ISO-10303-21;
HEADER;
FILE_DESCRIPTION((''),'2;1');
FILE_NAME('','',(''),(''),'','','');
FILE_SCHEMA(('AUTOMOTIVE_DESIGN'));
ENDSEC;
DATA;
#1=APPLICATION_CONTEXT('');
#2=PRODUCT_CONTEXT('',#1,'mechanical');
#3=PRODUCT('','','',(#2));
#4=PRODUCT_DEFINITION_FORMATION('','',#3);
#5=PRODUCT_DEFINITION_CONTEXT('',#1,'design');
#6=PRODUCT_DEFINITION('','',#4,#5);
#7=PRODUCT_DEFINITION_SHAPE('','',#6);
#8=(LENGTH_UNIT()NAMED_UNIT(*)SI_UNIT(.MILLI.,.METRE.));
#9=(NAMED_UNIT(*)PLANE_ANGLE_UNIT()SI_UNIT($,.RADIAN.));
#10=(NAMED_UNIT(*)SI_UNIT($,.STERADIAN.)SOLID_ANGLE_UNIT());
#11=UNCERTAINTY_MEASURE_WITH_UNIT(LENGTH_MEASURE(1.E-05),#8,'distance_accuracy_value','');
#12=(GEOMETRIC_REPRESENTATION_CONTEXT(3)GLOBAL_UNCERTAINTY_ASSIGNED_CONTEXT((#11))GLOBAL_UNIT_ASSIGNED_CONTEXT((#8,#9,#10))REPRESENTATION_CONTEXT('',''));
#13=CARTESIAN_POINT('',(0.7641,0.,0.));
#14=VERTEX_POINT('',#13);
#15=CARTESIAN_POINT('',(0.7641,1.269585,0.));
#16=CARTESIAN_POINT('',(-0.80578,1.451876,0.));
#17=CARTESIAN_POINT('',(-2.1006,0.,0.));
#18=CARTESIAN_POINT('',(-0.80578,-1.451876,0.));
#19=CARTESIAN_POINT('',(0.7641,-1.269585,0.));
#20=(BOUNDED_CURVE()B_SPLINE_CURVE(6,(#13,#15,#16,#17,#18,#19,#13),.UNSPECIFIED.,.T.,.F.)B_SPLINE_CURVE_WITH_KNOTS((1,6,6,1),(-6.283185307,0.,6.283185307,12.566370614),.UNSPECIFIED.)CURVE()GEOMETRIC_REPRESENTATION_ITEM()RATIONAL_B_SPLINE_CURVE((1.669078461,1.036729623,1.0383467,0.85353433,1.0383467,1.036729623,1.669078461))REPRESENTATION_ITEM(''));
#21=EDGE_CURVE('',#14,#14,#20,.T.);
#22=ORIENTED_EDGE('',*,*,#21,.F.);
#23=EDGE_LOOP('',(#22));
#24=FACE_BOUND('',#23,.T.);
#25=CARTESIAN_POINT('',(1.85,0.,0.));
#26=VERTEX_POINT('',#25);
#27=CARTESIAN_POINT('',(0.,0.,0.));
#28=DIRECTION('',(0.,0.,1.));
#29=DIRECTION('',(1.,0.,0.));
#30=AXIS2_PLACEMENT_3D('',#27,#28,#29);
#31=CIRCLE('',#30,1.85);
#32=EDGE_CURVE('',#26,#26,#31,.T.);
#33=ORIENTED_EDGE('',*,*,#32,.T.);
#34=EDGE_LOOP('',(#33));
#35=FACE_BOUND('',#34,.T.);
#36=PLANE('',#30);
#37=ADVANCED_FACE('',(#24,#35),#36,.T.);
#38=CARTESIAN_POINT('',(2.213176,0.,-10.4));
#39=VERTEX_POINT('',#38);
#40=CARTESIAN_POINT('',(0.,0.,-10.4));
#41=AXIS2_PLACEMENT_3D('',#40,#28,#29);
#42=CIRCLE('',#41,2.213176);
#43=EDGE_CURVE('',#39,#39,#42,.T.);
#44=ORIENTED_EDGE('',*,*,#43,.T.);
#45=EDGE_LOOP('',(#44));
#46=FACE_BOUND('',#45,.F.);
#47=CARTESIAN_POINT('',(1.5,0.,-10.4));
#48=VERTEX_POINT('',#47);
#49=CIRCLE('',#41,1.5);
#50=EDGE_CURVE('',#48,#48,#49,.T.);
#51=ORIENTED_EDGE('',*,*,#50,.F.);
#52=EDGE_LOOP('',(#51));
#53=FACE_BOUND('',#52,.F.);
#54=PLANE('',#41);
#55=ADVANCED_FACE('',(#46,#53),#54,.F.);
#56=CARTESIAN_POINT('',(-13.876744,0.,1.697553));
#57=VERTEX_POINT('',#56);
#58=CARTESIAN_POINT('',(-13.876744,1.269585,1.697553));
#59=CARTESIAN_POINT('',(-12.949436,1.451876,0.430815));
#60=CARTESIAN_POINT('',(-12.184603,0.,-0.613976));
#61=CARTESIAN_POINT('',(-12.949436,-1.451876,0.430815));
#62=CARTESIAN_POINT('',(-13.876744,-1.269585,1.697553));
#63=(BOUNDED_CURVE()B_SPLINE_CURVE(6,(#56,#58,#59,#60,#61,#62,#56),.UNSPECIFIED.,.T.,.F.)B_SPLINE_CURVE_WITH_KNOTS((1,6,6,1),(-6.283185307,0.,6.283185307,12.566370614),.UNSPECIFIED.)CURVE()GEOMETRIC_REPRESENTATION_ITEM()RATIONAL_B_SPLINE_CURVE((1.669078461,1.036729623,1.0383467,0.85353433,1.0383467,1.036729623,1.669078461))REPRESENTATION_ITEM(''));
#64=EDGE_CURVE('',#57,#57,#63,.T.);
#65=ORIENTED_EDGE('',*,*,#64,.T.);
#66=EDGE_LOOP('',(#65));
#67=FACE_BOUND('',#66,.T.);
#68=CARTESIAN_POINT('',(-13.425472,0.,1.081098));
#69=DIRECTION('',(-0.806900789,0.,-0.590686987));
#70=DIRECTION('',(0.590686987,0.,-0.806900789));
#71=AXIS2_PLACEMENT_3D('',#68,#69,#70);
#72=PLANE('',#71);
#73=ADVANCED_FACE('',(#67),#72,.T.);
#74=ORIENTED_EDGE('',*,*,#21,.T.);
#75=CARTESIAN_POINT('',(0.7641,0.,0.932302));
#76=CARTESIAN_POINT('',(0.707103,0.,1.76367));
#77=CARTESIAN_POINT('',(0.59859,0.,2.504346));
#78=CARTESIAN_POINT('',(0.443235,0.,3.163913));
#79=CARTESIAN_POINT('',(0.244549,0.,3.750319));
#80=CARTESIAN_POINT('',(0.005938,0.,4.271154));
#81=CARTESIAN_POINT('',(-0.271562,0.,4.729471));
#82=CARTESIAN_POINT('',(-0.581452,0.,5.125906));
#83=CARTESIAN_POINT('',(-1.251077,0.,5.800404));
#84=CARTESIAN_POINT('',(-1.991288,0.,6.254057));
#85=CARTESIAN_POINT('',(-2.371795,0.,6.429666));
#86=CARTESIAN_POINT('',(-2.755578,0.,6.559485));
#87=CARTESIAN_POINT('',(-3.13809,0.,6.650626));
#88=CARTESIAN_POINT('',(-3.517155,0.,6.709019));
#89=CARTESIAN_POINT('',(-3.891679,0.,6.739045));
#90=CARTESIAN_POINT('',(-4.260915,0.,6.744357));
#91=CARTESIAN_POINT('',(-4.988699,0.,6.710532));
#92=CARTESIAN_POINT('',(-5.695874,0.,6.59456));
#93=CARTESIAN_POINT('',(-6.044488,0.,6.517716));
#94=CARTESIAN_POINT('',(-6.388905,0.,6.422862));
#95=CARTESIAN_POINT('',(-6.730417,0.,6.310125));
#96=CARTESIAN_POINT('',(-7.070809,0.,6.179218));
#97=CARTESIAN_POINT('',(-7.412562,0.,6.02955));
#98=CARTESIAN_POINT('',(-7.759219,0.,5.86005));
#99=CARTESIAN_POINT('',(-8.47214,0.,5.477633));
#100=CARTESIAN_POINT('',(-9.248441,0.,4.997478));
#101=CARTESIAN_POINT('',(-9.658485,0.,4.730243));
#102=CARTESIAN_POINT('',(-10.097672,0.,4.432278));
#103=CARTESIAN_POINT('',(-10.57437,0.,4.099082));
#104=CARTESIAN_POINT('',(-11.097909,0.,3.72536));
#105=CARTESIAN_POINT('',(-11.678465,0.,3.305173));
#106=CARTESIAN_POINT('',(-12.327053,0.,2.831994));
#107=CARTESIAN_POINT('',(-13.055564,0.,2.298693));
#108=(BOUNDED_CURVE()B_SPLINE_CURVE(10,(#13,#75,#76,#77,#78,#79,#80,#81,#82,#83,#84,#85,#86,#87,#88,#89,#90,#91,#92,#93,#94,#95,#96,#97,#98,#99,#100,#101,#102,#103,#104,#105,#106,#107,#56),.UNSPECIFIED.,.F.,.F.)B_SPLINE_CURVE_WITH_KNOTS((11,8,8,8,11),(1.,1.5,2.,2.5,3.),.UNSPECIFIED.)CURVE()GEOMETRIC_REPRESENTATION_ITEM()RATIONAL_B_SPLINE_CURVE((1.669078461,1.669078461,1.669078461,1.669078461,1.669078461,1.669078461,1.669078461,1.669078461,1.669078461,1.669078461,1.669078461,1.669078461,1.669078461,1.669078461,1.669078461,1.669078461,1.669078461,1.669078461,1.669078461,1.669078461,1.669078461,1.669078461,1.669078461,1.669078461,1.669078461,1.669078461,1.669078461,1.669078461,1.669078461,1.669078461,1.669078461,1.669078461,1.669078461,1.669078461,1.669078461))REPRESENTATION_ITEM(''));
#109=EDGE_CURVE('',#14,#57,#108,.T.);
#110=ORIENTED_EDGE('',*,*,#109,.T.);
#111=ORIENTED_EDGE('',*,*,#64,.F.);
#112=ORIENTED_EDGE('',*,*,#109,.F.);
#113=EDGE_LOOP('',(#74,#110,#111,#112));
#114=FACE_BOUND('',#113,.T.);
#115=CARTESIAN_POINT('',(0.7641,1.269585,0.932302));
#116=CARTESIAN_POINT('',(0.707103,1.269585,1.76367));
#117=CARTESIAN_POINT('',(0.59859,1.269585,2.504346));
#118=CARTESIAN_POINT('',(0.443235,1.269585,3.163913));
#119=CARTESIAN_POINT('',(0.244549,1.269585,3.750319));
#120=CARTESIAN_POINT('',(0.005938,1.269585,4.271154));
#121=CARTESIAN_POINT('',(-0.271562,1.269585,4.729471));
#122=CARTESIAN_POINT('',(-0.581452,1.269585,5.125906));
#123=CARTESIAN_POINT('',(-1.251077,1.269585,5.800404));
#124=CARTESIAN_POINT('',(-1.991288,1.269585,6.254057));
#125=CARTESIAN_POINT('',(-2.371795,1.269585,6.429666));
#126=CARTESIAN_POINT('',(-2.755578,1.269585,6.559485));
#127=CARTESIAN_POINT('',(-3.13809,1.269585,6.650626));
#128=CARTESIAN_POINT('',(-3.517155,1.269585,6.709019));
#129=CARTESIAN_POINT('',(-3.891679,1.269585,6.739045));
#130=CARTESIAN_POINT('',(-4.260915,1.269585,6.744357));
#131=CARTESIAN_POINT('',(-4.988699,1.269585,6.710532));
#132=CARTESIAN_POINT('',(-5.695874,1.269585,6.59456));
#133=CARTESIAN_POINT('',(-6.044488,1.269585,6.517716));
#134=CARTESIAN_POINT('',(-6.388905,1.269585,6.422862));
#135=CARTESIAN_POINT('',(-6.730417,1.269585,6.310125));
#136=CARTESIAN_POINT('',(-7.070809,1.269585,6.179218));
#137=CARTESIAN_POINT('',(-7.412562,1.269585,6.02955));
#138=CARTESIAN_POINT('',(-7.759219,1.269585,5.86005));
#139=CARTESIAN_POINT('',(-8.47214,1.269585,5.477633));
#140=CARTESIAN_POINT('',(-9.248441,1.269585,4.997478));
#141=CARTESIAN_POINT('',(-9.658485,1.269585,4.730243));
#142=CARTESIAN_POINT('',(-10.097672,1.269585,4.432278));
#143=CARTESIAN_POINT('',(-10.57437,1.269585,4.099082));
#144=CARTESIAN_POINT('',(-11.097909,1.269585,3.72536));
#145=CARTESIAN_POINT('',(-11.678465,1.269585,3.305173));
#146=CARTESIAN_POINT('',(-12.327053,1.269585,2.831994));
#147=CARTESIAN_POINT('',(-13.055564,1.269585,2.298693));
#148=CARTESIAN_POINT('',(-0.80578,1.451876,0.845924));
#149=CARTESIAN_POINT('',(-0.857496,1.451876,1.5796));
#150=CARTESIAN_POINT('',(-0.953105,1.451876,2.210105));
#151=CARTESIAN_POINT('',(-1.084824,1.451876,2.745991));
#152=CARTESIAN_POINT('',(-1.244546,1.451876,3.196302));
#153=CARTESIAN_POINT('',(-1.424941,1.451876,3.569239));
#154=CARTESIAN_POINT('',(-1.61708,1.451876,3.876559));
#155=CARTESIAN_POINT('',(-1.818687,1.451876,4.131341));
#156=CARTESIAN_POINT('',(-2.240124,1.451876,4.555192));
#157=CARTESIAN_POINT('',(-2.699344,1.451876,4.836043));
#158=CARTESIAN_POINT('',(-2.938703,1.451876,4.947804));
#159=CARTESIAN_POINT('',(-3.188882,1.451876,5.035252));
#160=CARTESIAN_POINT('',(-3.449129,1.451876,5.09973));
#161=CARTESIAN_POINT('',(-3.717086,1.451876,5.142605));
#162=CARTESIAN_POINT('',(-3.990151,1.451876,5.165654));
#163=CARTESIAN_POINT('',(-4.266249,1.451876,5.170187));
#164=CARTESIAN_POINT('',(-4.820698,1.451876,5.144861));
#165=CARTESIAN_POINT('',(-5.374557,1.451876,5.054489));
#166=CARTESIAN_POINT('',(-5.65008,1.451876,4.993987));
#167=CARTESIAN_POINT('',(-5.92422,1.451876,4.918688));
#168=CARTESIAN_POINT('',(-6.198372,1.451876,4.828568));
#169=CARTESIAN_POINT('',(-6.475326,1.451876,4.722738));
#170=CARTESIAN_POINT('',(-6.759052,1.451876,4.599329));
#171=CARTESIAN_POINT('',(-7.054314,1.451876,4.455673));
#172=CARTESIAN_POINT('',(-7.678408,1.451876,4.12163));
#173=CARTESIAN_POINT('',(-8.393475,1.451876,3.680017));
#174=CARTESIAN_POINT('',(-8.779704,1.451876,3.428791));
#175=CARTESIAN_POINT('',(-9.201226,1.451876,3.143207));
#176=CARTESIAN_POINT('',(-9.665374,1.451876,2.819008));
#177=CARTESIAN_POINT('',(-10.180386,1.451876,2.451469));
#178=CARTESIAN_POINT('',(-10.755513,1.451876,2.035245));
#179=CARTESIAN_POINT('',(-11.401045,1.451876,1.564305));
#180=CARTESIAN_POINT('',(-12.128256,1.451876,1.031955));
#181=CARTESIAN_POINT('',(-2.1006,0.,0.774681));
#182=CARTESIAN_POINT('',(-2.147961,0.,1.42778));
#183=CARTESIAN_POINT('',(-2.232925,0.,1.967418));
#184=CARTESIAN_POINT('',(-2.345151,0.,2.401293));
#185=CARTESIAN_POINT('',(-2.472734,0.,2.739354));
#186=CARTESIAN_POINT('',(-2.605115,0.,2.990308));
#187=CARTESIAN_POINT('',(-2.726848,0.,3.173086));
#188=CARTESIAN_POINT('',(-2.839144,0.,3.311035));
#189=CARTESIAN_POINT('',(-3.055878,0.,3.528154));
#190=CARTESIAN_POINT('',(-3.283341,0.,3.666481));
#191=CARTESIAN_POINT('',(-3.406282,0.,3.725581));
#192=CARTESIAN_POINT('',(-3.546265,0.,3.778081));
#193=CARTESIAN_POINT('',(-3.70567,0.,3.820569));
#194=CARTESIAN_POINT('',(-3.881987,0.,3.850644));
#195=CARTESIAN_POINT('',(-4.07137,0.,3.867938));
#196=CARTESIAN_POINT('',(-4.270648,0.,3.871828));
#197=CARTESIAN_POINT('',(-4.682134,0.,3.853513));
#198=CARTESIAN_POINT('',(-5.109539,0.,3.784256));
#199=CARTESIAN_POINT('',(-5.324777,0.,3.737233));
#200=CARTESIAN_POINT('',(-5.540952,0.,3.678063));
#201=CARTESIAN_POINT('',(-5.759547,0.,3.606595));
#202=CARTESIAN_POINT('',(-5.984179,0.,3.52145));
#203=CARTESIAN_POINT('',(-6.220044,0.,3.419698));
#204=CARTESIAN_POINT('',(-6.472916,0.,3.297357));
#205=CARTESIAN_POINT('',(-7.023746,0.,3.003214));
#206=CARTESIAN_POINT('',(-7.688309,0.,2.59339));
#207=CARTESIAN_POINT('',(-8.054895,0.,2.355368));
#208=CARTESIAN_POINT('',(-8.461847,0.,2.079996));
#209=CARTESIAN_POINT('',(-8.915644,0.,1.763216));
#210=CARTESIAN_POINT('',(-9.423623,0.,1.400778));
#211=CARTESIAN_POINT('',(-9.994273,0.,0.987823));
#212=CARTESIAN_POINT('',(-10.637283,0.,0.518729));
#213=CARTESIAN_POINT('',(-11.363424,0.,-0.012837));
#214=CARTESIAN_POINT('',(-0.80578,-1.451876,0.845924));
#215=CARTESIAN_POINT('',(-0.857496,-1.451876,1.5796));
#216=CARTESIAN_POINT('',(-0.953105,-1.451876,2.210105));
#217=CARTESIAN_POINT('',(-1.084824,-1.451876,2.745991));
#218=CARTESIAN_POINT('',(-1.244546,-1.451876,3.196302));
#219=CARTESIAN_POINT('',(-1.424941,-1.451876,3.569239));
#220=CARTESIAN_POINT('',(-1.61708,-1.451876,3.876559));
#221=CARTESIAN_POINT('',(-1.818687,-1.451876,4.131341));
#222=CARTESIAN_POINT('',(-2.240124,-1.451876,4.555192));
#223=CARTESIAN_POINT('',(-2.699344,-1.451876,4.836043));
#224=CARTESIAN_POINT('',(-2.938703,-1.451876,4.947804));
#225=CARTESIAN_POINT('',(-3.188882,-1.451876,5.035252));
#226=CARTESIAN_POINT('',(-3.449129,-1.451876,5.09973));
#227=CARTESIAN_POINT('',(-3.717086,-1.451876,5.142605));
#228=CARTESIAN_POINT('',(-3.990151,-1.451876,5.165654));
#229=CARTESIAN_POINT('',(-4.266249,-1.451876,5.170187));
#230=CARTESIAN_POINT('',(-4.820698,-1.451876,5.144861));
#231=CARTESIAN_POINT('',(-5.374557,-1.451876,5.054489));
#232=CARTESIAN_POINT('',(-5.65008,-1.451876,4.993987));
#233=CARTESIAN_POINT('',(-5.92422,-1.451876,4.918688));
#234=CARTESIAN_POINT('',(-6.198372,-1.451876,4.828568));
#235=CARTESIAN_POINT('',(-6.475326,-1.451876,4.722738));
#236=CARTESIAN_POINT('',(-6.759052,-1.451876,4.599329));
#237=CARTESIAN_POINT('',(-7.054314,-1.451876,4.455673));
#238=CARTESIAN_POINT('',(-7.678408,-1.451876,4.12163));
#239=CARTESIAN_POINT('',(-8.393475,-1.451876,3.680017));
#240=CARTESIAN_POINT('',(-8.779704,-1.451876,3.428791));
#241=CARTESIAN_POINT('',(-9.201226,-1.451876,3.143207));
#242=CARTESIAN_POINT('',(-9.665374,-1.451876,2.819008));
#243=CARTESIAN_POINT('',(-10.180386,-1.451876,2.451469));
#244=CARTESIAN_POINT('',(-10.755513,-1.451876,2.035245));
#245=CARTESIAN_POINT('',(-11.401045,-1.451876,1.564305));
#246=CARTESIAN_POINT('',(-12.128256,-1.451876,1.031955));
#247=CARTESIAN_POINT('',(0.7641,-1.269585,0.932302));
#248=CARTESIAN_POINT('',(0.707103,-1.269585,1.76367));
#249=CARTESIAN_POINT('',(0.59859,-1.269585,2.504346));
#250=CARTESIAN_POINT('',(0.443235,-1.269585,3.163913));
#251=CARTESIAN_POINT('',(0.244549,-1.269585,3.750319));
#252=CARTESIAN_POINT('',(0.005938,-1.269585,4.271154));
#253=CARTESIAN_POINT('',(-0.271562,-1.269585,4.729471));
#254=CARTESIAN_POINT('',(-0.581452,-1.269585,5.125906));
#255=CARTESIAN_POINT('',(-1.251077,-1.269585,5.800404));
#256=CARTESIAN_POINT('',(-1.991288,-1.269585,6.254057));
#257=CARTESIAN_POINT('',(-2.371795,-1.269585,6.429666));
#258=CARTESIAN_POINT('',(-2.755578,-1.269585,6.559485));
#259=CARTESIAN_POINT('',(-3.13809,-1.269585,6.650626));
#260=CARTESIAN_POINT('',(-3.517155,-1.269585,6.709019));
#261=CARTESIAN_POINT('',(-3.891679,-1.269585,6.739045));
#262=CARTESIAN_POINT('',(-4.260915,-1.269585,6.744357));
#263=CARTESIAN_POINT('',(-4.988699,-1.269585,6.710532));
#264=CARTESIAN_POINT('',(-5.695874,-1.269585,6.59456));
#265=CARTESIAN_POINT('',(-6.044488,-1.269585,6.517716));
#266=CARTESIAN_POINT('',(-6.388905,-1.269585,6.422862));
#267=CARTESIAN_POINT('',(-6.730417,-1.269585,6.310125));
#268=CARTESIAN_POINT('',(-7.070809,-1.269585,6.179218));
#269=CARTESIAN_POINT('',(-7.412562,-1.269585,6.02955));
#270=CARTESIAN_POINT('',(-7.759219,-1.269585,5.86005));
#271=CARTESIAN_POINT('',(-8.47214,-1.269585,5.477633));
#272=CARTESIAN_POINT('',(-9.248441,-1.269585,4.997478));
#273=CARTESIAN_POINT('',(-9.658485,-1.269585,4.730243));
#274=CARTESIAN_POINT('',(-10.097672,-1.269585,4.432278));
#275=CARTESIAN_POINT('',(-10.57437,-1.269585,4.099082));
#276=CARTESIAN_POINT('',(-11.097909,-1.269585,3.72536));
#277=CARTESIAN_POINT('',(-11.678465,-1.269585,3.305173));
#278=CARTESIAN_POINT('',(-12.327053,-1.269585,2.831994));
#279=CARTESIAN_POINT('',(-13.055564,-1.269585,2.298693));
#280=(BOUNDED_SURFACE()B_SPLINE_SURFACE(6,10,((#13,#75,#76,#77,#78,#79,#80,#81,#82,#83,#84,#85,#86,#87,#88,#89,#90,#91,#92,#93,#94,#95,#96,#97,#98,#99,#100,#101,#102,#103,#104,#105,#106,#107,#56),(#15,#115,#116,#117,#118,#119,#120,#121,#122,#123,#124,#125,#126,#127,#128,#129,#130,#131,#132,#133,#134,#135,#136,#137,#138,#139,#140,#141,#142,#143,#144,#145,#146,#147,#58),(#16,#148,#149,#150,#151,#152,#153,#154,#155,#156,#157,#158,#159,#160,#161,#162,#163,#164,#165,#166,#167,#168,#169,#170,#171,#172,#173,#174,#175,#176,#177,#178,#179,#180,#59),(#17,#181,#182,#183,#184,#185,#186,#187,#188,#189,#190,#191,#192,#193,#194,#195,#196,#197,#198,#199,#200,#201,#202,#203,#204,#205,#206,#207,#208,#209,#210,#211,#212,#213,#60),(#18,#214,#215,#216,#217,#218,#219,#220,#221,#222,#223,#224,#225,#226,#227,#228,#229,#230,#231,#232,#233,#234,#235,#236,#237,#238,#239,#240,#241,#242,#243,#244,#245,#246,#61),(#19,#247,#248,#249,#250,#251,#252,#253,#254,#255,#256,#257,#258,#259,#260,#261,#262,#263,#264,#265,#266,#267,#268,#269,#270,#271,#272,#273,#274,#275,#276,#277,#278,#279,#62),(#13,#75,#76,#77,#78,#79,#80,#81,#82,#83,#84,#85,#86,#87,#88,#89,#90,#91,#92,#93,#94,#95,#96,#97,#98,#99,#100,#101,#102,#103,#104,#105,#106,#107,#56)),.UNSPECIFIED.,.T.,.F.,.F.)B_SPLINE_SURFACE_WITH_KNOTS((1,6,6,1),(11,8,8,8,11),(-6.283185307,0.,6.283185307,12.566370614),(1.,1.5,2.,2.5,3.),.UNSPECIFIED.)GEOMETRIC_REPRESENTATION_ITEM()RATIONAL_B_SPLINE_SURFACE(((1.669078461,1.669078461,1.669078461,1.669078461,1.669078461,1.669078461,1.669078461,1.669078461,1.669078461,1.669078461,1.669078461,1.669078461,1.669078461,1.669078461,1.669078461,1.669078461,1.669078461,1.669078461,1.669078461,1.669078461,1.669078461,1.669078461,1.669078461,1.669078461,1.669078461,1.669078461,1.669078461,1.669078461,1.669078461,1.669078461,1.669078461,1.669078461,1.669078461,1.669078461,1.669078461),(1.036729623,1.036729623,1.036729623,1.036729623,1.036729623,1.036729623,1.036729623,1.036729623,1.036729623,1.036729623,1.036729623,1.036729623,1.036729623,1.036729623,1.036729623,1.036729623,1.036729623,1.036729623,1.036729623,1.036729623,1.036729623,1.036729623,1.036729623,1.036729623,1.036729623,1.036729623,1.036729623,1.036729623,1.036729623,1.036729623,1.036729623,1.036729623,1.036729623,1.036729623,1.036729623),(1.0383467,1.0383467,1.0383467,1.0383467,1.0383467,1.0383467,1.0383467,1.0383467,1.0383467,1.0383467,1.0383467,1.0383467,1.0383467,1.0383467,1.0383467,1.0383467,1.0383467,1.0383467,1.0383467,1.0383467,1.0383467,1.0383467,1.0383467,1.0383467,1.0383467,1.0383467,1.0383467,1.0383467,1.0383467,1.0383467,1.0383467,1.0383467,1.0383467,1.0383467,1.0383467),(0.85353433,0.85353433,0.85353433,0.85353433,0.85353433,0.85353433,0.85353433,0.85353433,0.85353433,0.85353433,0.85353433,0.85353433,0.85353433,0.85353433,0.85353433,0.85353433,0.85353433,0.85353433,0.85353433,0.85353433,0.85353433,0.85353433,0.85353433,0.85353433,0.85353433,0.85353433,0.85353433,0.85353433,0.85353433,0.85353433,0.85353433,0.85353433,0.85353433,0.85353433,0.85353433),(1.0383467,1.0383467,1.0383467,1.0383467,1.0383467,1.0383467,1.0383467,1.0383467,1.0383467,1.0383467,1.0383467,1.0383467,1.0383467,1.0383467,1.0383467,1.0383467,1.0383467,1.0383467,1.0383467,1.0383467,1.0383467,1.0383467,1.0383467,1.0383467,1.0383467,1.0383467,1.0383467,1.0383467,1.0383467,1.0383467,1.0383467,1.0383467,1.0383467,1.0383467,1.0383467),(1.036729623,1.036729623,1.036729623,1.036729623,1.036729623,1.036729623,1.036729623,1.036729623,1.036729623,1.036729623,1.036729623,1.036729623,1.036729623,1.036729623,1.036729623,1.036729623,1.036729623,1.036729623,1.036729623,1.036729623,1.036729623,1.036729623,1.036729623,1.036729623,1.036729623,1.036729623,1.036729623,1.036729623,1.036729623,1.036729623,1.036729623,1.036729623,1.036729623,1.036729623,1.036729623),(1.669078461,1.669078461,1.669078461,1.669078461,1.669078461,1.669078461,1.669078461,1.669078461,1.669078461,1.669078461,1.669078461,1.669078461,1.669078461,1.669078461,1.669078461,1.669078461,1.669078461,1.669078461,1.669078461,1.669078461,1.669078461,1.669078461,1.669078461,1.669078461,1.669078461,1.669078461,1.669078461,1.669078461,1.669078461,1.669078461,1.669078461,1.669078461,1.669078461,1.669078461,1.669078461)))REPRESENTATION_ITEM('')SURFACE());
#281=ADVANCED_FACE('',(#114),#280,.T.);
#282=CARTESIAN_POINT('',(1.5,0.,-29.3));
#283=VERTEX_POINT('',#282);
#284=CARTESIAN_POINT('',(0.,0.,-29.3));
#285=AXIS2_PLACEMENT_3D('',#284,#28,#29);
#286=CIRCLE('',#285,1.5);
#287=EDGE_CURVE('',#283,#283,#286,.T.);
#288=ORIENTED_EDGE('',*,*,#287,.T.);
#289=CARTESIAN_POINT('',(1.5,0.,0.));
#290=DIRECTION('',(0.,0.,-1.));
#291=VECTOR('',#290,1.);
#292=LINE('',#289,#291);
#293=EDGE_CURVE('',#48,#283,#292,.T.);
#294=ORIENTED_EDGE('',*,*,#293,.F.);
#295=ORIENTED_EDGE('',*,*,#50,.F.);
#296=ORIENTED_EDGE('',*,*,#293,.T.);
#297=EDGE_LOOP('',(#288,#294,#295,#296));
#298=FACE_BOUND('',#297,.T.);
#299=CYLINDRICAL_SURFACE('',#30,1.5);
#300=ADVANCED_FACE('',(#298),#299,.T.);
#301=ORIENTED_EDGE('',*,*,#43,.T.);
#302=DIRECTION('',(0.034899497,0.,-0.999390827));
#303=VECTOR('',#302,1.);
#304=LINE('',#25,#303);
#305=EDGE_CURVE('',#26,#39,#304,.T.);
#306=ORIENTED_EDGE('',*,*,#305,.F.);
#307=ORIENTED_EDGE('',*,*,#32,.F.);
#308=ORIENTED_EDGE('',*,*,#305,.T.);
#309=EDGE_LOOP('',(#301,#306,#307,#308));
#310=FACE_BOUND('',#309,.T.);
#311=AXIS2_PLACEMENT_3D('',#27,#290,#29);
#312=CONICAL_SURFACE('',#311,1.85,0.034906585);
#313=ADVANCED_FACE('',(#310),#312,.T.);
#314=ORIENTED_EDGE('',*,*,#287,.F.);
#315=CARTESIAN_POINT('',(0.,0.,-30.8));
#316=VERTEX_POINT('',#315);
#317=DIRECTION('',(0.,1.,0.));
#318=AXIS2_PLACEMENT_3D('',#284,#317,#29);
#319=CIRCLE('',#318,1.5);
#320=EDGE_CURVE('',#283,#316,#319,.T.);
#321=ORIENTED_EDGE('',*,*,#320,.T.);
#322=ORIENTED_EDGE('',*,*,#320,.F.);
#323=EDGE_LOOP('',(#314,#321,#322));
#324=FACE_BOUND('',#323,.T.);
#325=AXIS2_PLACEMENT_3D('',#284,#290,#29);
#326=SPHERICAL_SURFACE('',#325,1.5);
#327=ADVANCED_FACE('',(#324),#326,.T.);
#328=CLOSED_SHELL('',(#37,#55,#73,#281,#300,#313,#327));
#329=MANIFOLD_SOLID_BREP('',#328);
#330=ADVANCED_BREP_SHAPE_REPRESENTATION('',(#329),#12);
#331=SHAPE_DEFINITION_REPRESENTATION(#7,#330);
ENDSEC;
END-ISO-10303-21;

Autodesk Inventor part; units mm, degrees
ref_plane "YZ Plane" through (0, 0, 0) normal (1, 0, 0) x (0, 1, 0)
ref_plane "XZ Plane" through (0, 0, 0) normal (0, 1, 0) x (-1, 0, 0)
ref_plane "XY Plane" through (0, 0, 0) normal (0, 0, 1) x (1, 0, 0)
sketch "Sketch1" plane through (0, 0, 0) normal (0, 0, 1) x (1, 0, 0)
  circle A0 centre (0, 0) radius 1.5
  dimension "d0" = 3
extrude "Extrusion1" add sketch "Sketch1" against normal blind 30.8
fillet "Fillet1" radius 1.5 1 edges at (-1.5, 0, -30.8)
sketch "Sketch2" plane through (0, 0, 0) normal (0, 0, 1) x (1, 0, 0)
  circle A0 centre (0, 0) radius 0.7641
sketch "Sketch3" plane through (0, 0, 0) normal (0, 1, 0) x (-1, 0, 0)
  line L0 (0, 0) -> (0, 4.4513) construction
  line L1 (0, 4.4513) -> (3.2656, 6.9674) construction
  line L2 (3.2656, 6.9674) -> (6.7058, 6) construction
  line L3 (6.7058, 6) -> (9.3195, 4.0867) construction
  line L4 (9.3195, 4.0867) -> (13.4254, 1.081) construction
  spline S0 degree 4 poles (0, 0) (0, 4.4513) (3.2656, 6.9674) (6.7058, 6) (9.3195, 4.0867) (13.4254, 1.081) knots 1 1 1 1 1 2 3 3 3 3 3
  line L5 (-1.5, 0) -> (1.5, 0) projected
  dimension "d11" = 6
sweep "Sweep1" add profiles "Sketch2" path "Sketch3" path curves S0
sketch "Sketch4" plane through (0, 0, 0) normal (0, 0, 1) x (1, 0, 0)
  circle A0 centre (0, 0) radius 1.85
  circle A1 centre (0, 0) radius 1.5 projected
  dimension "d8" = 3.7
extrude "Extrusion2" add sketch "Sketch4" against normal blind 10.4 draft 2 contours A0 | A1
properties part number "TempSensor_RS-762-1134"
